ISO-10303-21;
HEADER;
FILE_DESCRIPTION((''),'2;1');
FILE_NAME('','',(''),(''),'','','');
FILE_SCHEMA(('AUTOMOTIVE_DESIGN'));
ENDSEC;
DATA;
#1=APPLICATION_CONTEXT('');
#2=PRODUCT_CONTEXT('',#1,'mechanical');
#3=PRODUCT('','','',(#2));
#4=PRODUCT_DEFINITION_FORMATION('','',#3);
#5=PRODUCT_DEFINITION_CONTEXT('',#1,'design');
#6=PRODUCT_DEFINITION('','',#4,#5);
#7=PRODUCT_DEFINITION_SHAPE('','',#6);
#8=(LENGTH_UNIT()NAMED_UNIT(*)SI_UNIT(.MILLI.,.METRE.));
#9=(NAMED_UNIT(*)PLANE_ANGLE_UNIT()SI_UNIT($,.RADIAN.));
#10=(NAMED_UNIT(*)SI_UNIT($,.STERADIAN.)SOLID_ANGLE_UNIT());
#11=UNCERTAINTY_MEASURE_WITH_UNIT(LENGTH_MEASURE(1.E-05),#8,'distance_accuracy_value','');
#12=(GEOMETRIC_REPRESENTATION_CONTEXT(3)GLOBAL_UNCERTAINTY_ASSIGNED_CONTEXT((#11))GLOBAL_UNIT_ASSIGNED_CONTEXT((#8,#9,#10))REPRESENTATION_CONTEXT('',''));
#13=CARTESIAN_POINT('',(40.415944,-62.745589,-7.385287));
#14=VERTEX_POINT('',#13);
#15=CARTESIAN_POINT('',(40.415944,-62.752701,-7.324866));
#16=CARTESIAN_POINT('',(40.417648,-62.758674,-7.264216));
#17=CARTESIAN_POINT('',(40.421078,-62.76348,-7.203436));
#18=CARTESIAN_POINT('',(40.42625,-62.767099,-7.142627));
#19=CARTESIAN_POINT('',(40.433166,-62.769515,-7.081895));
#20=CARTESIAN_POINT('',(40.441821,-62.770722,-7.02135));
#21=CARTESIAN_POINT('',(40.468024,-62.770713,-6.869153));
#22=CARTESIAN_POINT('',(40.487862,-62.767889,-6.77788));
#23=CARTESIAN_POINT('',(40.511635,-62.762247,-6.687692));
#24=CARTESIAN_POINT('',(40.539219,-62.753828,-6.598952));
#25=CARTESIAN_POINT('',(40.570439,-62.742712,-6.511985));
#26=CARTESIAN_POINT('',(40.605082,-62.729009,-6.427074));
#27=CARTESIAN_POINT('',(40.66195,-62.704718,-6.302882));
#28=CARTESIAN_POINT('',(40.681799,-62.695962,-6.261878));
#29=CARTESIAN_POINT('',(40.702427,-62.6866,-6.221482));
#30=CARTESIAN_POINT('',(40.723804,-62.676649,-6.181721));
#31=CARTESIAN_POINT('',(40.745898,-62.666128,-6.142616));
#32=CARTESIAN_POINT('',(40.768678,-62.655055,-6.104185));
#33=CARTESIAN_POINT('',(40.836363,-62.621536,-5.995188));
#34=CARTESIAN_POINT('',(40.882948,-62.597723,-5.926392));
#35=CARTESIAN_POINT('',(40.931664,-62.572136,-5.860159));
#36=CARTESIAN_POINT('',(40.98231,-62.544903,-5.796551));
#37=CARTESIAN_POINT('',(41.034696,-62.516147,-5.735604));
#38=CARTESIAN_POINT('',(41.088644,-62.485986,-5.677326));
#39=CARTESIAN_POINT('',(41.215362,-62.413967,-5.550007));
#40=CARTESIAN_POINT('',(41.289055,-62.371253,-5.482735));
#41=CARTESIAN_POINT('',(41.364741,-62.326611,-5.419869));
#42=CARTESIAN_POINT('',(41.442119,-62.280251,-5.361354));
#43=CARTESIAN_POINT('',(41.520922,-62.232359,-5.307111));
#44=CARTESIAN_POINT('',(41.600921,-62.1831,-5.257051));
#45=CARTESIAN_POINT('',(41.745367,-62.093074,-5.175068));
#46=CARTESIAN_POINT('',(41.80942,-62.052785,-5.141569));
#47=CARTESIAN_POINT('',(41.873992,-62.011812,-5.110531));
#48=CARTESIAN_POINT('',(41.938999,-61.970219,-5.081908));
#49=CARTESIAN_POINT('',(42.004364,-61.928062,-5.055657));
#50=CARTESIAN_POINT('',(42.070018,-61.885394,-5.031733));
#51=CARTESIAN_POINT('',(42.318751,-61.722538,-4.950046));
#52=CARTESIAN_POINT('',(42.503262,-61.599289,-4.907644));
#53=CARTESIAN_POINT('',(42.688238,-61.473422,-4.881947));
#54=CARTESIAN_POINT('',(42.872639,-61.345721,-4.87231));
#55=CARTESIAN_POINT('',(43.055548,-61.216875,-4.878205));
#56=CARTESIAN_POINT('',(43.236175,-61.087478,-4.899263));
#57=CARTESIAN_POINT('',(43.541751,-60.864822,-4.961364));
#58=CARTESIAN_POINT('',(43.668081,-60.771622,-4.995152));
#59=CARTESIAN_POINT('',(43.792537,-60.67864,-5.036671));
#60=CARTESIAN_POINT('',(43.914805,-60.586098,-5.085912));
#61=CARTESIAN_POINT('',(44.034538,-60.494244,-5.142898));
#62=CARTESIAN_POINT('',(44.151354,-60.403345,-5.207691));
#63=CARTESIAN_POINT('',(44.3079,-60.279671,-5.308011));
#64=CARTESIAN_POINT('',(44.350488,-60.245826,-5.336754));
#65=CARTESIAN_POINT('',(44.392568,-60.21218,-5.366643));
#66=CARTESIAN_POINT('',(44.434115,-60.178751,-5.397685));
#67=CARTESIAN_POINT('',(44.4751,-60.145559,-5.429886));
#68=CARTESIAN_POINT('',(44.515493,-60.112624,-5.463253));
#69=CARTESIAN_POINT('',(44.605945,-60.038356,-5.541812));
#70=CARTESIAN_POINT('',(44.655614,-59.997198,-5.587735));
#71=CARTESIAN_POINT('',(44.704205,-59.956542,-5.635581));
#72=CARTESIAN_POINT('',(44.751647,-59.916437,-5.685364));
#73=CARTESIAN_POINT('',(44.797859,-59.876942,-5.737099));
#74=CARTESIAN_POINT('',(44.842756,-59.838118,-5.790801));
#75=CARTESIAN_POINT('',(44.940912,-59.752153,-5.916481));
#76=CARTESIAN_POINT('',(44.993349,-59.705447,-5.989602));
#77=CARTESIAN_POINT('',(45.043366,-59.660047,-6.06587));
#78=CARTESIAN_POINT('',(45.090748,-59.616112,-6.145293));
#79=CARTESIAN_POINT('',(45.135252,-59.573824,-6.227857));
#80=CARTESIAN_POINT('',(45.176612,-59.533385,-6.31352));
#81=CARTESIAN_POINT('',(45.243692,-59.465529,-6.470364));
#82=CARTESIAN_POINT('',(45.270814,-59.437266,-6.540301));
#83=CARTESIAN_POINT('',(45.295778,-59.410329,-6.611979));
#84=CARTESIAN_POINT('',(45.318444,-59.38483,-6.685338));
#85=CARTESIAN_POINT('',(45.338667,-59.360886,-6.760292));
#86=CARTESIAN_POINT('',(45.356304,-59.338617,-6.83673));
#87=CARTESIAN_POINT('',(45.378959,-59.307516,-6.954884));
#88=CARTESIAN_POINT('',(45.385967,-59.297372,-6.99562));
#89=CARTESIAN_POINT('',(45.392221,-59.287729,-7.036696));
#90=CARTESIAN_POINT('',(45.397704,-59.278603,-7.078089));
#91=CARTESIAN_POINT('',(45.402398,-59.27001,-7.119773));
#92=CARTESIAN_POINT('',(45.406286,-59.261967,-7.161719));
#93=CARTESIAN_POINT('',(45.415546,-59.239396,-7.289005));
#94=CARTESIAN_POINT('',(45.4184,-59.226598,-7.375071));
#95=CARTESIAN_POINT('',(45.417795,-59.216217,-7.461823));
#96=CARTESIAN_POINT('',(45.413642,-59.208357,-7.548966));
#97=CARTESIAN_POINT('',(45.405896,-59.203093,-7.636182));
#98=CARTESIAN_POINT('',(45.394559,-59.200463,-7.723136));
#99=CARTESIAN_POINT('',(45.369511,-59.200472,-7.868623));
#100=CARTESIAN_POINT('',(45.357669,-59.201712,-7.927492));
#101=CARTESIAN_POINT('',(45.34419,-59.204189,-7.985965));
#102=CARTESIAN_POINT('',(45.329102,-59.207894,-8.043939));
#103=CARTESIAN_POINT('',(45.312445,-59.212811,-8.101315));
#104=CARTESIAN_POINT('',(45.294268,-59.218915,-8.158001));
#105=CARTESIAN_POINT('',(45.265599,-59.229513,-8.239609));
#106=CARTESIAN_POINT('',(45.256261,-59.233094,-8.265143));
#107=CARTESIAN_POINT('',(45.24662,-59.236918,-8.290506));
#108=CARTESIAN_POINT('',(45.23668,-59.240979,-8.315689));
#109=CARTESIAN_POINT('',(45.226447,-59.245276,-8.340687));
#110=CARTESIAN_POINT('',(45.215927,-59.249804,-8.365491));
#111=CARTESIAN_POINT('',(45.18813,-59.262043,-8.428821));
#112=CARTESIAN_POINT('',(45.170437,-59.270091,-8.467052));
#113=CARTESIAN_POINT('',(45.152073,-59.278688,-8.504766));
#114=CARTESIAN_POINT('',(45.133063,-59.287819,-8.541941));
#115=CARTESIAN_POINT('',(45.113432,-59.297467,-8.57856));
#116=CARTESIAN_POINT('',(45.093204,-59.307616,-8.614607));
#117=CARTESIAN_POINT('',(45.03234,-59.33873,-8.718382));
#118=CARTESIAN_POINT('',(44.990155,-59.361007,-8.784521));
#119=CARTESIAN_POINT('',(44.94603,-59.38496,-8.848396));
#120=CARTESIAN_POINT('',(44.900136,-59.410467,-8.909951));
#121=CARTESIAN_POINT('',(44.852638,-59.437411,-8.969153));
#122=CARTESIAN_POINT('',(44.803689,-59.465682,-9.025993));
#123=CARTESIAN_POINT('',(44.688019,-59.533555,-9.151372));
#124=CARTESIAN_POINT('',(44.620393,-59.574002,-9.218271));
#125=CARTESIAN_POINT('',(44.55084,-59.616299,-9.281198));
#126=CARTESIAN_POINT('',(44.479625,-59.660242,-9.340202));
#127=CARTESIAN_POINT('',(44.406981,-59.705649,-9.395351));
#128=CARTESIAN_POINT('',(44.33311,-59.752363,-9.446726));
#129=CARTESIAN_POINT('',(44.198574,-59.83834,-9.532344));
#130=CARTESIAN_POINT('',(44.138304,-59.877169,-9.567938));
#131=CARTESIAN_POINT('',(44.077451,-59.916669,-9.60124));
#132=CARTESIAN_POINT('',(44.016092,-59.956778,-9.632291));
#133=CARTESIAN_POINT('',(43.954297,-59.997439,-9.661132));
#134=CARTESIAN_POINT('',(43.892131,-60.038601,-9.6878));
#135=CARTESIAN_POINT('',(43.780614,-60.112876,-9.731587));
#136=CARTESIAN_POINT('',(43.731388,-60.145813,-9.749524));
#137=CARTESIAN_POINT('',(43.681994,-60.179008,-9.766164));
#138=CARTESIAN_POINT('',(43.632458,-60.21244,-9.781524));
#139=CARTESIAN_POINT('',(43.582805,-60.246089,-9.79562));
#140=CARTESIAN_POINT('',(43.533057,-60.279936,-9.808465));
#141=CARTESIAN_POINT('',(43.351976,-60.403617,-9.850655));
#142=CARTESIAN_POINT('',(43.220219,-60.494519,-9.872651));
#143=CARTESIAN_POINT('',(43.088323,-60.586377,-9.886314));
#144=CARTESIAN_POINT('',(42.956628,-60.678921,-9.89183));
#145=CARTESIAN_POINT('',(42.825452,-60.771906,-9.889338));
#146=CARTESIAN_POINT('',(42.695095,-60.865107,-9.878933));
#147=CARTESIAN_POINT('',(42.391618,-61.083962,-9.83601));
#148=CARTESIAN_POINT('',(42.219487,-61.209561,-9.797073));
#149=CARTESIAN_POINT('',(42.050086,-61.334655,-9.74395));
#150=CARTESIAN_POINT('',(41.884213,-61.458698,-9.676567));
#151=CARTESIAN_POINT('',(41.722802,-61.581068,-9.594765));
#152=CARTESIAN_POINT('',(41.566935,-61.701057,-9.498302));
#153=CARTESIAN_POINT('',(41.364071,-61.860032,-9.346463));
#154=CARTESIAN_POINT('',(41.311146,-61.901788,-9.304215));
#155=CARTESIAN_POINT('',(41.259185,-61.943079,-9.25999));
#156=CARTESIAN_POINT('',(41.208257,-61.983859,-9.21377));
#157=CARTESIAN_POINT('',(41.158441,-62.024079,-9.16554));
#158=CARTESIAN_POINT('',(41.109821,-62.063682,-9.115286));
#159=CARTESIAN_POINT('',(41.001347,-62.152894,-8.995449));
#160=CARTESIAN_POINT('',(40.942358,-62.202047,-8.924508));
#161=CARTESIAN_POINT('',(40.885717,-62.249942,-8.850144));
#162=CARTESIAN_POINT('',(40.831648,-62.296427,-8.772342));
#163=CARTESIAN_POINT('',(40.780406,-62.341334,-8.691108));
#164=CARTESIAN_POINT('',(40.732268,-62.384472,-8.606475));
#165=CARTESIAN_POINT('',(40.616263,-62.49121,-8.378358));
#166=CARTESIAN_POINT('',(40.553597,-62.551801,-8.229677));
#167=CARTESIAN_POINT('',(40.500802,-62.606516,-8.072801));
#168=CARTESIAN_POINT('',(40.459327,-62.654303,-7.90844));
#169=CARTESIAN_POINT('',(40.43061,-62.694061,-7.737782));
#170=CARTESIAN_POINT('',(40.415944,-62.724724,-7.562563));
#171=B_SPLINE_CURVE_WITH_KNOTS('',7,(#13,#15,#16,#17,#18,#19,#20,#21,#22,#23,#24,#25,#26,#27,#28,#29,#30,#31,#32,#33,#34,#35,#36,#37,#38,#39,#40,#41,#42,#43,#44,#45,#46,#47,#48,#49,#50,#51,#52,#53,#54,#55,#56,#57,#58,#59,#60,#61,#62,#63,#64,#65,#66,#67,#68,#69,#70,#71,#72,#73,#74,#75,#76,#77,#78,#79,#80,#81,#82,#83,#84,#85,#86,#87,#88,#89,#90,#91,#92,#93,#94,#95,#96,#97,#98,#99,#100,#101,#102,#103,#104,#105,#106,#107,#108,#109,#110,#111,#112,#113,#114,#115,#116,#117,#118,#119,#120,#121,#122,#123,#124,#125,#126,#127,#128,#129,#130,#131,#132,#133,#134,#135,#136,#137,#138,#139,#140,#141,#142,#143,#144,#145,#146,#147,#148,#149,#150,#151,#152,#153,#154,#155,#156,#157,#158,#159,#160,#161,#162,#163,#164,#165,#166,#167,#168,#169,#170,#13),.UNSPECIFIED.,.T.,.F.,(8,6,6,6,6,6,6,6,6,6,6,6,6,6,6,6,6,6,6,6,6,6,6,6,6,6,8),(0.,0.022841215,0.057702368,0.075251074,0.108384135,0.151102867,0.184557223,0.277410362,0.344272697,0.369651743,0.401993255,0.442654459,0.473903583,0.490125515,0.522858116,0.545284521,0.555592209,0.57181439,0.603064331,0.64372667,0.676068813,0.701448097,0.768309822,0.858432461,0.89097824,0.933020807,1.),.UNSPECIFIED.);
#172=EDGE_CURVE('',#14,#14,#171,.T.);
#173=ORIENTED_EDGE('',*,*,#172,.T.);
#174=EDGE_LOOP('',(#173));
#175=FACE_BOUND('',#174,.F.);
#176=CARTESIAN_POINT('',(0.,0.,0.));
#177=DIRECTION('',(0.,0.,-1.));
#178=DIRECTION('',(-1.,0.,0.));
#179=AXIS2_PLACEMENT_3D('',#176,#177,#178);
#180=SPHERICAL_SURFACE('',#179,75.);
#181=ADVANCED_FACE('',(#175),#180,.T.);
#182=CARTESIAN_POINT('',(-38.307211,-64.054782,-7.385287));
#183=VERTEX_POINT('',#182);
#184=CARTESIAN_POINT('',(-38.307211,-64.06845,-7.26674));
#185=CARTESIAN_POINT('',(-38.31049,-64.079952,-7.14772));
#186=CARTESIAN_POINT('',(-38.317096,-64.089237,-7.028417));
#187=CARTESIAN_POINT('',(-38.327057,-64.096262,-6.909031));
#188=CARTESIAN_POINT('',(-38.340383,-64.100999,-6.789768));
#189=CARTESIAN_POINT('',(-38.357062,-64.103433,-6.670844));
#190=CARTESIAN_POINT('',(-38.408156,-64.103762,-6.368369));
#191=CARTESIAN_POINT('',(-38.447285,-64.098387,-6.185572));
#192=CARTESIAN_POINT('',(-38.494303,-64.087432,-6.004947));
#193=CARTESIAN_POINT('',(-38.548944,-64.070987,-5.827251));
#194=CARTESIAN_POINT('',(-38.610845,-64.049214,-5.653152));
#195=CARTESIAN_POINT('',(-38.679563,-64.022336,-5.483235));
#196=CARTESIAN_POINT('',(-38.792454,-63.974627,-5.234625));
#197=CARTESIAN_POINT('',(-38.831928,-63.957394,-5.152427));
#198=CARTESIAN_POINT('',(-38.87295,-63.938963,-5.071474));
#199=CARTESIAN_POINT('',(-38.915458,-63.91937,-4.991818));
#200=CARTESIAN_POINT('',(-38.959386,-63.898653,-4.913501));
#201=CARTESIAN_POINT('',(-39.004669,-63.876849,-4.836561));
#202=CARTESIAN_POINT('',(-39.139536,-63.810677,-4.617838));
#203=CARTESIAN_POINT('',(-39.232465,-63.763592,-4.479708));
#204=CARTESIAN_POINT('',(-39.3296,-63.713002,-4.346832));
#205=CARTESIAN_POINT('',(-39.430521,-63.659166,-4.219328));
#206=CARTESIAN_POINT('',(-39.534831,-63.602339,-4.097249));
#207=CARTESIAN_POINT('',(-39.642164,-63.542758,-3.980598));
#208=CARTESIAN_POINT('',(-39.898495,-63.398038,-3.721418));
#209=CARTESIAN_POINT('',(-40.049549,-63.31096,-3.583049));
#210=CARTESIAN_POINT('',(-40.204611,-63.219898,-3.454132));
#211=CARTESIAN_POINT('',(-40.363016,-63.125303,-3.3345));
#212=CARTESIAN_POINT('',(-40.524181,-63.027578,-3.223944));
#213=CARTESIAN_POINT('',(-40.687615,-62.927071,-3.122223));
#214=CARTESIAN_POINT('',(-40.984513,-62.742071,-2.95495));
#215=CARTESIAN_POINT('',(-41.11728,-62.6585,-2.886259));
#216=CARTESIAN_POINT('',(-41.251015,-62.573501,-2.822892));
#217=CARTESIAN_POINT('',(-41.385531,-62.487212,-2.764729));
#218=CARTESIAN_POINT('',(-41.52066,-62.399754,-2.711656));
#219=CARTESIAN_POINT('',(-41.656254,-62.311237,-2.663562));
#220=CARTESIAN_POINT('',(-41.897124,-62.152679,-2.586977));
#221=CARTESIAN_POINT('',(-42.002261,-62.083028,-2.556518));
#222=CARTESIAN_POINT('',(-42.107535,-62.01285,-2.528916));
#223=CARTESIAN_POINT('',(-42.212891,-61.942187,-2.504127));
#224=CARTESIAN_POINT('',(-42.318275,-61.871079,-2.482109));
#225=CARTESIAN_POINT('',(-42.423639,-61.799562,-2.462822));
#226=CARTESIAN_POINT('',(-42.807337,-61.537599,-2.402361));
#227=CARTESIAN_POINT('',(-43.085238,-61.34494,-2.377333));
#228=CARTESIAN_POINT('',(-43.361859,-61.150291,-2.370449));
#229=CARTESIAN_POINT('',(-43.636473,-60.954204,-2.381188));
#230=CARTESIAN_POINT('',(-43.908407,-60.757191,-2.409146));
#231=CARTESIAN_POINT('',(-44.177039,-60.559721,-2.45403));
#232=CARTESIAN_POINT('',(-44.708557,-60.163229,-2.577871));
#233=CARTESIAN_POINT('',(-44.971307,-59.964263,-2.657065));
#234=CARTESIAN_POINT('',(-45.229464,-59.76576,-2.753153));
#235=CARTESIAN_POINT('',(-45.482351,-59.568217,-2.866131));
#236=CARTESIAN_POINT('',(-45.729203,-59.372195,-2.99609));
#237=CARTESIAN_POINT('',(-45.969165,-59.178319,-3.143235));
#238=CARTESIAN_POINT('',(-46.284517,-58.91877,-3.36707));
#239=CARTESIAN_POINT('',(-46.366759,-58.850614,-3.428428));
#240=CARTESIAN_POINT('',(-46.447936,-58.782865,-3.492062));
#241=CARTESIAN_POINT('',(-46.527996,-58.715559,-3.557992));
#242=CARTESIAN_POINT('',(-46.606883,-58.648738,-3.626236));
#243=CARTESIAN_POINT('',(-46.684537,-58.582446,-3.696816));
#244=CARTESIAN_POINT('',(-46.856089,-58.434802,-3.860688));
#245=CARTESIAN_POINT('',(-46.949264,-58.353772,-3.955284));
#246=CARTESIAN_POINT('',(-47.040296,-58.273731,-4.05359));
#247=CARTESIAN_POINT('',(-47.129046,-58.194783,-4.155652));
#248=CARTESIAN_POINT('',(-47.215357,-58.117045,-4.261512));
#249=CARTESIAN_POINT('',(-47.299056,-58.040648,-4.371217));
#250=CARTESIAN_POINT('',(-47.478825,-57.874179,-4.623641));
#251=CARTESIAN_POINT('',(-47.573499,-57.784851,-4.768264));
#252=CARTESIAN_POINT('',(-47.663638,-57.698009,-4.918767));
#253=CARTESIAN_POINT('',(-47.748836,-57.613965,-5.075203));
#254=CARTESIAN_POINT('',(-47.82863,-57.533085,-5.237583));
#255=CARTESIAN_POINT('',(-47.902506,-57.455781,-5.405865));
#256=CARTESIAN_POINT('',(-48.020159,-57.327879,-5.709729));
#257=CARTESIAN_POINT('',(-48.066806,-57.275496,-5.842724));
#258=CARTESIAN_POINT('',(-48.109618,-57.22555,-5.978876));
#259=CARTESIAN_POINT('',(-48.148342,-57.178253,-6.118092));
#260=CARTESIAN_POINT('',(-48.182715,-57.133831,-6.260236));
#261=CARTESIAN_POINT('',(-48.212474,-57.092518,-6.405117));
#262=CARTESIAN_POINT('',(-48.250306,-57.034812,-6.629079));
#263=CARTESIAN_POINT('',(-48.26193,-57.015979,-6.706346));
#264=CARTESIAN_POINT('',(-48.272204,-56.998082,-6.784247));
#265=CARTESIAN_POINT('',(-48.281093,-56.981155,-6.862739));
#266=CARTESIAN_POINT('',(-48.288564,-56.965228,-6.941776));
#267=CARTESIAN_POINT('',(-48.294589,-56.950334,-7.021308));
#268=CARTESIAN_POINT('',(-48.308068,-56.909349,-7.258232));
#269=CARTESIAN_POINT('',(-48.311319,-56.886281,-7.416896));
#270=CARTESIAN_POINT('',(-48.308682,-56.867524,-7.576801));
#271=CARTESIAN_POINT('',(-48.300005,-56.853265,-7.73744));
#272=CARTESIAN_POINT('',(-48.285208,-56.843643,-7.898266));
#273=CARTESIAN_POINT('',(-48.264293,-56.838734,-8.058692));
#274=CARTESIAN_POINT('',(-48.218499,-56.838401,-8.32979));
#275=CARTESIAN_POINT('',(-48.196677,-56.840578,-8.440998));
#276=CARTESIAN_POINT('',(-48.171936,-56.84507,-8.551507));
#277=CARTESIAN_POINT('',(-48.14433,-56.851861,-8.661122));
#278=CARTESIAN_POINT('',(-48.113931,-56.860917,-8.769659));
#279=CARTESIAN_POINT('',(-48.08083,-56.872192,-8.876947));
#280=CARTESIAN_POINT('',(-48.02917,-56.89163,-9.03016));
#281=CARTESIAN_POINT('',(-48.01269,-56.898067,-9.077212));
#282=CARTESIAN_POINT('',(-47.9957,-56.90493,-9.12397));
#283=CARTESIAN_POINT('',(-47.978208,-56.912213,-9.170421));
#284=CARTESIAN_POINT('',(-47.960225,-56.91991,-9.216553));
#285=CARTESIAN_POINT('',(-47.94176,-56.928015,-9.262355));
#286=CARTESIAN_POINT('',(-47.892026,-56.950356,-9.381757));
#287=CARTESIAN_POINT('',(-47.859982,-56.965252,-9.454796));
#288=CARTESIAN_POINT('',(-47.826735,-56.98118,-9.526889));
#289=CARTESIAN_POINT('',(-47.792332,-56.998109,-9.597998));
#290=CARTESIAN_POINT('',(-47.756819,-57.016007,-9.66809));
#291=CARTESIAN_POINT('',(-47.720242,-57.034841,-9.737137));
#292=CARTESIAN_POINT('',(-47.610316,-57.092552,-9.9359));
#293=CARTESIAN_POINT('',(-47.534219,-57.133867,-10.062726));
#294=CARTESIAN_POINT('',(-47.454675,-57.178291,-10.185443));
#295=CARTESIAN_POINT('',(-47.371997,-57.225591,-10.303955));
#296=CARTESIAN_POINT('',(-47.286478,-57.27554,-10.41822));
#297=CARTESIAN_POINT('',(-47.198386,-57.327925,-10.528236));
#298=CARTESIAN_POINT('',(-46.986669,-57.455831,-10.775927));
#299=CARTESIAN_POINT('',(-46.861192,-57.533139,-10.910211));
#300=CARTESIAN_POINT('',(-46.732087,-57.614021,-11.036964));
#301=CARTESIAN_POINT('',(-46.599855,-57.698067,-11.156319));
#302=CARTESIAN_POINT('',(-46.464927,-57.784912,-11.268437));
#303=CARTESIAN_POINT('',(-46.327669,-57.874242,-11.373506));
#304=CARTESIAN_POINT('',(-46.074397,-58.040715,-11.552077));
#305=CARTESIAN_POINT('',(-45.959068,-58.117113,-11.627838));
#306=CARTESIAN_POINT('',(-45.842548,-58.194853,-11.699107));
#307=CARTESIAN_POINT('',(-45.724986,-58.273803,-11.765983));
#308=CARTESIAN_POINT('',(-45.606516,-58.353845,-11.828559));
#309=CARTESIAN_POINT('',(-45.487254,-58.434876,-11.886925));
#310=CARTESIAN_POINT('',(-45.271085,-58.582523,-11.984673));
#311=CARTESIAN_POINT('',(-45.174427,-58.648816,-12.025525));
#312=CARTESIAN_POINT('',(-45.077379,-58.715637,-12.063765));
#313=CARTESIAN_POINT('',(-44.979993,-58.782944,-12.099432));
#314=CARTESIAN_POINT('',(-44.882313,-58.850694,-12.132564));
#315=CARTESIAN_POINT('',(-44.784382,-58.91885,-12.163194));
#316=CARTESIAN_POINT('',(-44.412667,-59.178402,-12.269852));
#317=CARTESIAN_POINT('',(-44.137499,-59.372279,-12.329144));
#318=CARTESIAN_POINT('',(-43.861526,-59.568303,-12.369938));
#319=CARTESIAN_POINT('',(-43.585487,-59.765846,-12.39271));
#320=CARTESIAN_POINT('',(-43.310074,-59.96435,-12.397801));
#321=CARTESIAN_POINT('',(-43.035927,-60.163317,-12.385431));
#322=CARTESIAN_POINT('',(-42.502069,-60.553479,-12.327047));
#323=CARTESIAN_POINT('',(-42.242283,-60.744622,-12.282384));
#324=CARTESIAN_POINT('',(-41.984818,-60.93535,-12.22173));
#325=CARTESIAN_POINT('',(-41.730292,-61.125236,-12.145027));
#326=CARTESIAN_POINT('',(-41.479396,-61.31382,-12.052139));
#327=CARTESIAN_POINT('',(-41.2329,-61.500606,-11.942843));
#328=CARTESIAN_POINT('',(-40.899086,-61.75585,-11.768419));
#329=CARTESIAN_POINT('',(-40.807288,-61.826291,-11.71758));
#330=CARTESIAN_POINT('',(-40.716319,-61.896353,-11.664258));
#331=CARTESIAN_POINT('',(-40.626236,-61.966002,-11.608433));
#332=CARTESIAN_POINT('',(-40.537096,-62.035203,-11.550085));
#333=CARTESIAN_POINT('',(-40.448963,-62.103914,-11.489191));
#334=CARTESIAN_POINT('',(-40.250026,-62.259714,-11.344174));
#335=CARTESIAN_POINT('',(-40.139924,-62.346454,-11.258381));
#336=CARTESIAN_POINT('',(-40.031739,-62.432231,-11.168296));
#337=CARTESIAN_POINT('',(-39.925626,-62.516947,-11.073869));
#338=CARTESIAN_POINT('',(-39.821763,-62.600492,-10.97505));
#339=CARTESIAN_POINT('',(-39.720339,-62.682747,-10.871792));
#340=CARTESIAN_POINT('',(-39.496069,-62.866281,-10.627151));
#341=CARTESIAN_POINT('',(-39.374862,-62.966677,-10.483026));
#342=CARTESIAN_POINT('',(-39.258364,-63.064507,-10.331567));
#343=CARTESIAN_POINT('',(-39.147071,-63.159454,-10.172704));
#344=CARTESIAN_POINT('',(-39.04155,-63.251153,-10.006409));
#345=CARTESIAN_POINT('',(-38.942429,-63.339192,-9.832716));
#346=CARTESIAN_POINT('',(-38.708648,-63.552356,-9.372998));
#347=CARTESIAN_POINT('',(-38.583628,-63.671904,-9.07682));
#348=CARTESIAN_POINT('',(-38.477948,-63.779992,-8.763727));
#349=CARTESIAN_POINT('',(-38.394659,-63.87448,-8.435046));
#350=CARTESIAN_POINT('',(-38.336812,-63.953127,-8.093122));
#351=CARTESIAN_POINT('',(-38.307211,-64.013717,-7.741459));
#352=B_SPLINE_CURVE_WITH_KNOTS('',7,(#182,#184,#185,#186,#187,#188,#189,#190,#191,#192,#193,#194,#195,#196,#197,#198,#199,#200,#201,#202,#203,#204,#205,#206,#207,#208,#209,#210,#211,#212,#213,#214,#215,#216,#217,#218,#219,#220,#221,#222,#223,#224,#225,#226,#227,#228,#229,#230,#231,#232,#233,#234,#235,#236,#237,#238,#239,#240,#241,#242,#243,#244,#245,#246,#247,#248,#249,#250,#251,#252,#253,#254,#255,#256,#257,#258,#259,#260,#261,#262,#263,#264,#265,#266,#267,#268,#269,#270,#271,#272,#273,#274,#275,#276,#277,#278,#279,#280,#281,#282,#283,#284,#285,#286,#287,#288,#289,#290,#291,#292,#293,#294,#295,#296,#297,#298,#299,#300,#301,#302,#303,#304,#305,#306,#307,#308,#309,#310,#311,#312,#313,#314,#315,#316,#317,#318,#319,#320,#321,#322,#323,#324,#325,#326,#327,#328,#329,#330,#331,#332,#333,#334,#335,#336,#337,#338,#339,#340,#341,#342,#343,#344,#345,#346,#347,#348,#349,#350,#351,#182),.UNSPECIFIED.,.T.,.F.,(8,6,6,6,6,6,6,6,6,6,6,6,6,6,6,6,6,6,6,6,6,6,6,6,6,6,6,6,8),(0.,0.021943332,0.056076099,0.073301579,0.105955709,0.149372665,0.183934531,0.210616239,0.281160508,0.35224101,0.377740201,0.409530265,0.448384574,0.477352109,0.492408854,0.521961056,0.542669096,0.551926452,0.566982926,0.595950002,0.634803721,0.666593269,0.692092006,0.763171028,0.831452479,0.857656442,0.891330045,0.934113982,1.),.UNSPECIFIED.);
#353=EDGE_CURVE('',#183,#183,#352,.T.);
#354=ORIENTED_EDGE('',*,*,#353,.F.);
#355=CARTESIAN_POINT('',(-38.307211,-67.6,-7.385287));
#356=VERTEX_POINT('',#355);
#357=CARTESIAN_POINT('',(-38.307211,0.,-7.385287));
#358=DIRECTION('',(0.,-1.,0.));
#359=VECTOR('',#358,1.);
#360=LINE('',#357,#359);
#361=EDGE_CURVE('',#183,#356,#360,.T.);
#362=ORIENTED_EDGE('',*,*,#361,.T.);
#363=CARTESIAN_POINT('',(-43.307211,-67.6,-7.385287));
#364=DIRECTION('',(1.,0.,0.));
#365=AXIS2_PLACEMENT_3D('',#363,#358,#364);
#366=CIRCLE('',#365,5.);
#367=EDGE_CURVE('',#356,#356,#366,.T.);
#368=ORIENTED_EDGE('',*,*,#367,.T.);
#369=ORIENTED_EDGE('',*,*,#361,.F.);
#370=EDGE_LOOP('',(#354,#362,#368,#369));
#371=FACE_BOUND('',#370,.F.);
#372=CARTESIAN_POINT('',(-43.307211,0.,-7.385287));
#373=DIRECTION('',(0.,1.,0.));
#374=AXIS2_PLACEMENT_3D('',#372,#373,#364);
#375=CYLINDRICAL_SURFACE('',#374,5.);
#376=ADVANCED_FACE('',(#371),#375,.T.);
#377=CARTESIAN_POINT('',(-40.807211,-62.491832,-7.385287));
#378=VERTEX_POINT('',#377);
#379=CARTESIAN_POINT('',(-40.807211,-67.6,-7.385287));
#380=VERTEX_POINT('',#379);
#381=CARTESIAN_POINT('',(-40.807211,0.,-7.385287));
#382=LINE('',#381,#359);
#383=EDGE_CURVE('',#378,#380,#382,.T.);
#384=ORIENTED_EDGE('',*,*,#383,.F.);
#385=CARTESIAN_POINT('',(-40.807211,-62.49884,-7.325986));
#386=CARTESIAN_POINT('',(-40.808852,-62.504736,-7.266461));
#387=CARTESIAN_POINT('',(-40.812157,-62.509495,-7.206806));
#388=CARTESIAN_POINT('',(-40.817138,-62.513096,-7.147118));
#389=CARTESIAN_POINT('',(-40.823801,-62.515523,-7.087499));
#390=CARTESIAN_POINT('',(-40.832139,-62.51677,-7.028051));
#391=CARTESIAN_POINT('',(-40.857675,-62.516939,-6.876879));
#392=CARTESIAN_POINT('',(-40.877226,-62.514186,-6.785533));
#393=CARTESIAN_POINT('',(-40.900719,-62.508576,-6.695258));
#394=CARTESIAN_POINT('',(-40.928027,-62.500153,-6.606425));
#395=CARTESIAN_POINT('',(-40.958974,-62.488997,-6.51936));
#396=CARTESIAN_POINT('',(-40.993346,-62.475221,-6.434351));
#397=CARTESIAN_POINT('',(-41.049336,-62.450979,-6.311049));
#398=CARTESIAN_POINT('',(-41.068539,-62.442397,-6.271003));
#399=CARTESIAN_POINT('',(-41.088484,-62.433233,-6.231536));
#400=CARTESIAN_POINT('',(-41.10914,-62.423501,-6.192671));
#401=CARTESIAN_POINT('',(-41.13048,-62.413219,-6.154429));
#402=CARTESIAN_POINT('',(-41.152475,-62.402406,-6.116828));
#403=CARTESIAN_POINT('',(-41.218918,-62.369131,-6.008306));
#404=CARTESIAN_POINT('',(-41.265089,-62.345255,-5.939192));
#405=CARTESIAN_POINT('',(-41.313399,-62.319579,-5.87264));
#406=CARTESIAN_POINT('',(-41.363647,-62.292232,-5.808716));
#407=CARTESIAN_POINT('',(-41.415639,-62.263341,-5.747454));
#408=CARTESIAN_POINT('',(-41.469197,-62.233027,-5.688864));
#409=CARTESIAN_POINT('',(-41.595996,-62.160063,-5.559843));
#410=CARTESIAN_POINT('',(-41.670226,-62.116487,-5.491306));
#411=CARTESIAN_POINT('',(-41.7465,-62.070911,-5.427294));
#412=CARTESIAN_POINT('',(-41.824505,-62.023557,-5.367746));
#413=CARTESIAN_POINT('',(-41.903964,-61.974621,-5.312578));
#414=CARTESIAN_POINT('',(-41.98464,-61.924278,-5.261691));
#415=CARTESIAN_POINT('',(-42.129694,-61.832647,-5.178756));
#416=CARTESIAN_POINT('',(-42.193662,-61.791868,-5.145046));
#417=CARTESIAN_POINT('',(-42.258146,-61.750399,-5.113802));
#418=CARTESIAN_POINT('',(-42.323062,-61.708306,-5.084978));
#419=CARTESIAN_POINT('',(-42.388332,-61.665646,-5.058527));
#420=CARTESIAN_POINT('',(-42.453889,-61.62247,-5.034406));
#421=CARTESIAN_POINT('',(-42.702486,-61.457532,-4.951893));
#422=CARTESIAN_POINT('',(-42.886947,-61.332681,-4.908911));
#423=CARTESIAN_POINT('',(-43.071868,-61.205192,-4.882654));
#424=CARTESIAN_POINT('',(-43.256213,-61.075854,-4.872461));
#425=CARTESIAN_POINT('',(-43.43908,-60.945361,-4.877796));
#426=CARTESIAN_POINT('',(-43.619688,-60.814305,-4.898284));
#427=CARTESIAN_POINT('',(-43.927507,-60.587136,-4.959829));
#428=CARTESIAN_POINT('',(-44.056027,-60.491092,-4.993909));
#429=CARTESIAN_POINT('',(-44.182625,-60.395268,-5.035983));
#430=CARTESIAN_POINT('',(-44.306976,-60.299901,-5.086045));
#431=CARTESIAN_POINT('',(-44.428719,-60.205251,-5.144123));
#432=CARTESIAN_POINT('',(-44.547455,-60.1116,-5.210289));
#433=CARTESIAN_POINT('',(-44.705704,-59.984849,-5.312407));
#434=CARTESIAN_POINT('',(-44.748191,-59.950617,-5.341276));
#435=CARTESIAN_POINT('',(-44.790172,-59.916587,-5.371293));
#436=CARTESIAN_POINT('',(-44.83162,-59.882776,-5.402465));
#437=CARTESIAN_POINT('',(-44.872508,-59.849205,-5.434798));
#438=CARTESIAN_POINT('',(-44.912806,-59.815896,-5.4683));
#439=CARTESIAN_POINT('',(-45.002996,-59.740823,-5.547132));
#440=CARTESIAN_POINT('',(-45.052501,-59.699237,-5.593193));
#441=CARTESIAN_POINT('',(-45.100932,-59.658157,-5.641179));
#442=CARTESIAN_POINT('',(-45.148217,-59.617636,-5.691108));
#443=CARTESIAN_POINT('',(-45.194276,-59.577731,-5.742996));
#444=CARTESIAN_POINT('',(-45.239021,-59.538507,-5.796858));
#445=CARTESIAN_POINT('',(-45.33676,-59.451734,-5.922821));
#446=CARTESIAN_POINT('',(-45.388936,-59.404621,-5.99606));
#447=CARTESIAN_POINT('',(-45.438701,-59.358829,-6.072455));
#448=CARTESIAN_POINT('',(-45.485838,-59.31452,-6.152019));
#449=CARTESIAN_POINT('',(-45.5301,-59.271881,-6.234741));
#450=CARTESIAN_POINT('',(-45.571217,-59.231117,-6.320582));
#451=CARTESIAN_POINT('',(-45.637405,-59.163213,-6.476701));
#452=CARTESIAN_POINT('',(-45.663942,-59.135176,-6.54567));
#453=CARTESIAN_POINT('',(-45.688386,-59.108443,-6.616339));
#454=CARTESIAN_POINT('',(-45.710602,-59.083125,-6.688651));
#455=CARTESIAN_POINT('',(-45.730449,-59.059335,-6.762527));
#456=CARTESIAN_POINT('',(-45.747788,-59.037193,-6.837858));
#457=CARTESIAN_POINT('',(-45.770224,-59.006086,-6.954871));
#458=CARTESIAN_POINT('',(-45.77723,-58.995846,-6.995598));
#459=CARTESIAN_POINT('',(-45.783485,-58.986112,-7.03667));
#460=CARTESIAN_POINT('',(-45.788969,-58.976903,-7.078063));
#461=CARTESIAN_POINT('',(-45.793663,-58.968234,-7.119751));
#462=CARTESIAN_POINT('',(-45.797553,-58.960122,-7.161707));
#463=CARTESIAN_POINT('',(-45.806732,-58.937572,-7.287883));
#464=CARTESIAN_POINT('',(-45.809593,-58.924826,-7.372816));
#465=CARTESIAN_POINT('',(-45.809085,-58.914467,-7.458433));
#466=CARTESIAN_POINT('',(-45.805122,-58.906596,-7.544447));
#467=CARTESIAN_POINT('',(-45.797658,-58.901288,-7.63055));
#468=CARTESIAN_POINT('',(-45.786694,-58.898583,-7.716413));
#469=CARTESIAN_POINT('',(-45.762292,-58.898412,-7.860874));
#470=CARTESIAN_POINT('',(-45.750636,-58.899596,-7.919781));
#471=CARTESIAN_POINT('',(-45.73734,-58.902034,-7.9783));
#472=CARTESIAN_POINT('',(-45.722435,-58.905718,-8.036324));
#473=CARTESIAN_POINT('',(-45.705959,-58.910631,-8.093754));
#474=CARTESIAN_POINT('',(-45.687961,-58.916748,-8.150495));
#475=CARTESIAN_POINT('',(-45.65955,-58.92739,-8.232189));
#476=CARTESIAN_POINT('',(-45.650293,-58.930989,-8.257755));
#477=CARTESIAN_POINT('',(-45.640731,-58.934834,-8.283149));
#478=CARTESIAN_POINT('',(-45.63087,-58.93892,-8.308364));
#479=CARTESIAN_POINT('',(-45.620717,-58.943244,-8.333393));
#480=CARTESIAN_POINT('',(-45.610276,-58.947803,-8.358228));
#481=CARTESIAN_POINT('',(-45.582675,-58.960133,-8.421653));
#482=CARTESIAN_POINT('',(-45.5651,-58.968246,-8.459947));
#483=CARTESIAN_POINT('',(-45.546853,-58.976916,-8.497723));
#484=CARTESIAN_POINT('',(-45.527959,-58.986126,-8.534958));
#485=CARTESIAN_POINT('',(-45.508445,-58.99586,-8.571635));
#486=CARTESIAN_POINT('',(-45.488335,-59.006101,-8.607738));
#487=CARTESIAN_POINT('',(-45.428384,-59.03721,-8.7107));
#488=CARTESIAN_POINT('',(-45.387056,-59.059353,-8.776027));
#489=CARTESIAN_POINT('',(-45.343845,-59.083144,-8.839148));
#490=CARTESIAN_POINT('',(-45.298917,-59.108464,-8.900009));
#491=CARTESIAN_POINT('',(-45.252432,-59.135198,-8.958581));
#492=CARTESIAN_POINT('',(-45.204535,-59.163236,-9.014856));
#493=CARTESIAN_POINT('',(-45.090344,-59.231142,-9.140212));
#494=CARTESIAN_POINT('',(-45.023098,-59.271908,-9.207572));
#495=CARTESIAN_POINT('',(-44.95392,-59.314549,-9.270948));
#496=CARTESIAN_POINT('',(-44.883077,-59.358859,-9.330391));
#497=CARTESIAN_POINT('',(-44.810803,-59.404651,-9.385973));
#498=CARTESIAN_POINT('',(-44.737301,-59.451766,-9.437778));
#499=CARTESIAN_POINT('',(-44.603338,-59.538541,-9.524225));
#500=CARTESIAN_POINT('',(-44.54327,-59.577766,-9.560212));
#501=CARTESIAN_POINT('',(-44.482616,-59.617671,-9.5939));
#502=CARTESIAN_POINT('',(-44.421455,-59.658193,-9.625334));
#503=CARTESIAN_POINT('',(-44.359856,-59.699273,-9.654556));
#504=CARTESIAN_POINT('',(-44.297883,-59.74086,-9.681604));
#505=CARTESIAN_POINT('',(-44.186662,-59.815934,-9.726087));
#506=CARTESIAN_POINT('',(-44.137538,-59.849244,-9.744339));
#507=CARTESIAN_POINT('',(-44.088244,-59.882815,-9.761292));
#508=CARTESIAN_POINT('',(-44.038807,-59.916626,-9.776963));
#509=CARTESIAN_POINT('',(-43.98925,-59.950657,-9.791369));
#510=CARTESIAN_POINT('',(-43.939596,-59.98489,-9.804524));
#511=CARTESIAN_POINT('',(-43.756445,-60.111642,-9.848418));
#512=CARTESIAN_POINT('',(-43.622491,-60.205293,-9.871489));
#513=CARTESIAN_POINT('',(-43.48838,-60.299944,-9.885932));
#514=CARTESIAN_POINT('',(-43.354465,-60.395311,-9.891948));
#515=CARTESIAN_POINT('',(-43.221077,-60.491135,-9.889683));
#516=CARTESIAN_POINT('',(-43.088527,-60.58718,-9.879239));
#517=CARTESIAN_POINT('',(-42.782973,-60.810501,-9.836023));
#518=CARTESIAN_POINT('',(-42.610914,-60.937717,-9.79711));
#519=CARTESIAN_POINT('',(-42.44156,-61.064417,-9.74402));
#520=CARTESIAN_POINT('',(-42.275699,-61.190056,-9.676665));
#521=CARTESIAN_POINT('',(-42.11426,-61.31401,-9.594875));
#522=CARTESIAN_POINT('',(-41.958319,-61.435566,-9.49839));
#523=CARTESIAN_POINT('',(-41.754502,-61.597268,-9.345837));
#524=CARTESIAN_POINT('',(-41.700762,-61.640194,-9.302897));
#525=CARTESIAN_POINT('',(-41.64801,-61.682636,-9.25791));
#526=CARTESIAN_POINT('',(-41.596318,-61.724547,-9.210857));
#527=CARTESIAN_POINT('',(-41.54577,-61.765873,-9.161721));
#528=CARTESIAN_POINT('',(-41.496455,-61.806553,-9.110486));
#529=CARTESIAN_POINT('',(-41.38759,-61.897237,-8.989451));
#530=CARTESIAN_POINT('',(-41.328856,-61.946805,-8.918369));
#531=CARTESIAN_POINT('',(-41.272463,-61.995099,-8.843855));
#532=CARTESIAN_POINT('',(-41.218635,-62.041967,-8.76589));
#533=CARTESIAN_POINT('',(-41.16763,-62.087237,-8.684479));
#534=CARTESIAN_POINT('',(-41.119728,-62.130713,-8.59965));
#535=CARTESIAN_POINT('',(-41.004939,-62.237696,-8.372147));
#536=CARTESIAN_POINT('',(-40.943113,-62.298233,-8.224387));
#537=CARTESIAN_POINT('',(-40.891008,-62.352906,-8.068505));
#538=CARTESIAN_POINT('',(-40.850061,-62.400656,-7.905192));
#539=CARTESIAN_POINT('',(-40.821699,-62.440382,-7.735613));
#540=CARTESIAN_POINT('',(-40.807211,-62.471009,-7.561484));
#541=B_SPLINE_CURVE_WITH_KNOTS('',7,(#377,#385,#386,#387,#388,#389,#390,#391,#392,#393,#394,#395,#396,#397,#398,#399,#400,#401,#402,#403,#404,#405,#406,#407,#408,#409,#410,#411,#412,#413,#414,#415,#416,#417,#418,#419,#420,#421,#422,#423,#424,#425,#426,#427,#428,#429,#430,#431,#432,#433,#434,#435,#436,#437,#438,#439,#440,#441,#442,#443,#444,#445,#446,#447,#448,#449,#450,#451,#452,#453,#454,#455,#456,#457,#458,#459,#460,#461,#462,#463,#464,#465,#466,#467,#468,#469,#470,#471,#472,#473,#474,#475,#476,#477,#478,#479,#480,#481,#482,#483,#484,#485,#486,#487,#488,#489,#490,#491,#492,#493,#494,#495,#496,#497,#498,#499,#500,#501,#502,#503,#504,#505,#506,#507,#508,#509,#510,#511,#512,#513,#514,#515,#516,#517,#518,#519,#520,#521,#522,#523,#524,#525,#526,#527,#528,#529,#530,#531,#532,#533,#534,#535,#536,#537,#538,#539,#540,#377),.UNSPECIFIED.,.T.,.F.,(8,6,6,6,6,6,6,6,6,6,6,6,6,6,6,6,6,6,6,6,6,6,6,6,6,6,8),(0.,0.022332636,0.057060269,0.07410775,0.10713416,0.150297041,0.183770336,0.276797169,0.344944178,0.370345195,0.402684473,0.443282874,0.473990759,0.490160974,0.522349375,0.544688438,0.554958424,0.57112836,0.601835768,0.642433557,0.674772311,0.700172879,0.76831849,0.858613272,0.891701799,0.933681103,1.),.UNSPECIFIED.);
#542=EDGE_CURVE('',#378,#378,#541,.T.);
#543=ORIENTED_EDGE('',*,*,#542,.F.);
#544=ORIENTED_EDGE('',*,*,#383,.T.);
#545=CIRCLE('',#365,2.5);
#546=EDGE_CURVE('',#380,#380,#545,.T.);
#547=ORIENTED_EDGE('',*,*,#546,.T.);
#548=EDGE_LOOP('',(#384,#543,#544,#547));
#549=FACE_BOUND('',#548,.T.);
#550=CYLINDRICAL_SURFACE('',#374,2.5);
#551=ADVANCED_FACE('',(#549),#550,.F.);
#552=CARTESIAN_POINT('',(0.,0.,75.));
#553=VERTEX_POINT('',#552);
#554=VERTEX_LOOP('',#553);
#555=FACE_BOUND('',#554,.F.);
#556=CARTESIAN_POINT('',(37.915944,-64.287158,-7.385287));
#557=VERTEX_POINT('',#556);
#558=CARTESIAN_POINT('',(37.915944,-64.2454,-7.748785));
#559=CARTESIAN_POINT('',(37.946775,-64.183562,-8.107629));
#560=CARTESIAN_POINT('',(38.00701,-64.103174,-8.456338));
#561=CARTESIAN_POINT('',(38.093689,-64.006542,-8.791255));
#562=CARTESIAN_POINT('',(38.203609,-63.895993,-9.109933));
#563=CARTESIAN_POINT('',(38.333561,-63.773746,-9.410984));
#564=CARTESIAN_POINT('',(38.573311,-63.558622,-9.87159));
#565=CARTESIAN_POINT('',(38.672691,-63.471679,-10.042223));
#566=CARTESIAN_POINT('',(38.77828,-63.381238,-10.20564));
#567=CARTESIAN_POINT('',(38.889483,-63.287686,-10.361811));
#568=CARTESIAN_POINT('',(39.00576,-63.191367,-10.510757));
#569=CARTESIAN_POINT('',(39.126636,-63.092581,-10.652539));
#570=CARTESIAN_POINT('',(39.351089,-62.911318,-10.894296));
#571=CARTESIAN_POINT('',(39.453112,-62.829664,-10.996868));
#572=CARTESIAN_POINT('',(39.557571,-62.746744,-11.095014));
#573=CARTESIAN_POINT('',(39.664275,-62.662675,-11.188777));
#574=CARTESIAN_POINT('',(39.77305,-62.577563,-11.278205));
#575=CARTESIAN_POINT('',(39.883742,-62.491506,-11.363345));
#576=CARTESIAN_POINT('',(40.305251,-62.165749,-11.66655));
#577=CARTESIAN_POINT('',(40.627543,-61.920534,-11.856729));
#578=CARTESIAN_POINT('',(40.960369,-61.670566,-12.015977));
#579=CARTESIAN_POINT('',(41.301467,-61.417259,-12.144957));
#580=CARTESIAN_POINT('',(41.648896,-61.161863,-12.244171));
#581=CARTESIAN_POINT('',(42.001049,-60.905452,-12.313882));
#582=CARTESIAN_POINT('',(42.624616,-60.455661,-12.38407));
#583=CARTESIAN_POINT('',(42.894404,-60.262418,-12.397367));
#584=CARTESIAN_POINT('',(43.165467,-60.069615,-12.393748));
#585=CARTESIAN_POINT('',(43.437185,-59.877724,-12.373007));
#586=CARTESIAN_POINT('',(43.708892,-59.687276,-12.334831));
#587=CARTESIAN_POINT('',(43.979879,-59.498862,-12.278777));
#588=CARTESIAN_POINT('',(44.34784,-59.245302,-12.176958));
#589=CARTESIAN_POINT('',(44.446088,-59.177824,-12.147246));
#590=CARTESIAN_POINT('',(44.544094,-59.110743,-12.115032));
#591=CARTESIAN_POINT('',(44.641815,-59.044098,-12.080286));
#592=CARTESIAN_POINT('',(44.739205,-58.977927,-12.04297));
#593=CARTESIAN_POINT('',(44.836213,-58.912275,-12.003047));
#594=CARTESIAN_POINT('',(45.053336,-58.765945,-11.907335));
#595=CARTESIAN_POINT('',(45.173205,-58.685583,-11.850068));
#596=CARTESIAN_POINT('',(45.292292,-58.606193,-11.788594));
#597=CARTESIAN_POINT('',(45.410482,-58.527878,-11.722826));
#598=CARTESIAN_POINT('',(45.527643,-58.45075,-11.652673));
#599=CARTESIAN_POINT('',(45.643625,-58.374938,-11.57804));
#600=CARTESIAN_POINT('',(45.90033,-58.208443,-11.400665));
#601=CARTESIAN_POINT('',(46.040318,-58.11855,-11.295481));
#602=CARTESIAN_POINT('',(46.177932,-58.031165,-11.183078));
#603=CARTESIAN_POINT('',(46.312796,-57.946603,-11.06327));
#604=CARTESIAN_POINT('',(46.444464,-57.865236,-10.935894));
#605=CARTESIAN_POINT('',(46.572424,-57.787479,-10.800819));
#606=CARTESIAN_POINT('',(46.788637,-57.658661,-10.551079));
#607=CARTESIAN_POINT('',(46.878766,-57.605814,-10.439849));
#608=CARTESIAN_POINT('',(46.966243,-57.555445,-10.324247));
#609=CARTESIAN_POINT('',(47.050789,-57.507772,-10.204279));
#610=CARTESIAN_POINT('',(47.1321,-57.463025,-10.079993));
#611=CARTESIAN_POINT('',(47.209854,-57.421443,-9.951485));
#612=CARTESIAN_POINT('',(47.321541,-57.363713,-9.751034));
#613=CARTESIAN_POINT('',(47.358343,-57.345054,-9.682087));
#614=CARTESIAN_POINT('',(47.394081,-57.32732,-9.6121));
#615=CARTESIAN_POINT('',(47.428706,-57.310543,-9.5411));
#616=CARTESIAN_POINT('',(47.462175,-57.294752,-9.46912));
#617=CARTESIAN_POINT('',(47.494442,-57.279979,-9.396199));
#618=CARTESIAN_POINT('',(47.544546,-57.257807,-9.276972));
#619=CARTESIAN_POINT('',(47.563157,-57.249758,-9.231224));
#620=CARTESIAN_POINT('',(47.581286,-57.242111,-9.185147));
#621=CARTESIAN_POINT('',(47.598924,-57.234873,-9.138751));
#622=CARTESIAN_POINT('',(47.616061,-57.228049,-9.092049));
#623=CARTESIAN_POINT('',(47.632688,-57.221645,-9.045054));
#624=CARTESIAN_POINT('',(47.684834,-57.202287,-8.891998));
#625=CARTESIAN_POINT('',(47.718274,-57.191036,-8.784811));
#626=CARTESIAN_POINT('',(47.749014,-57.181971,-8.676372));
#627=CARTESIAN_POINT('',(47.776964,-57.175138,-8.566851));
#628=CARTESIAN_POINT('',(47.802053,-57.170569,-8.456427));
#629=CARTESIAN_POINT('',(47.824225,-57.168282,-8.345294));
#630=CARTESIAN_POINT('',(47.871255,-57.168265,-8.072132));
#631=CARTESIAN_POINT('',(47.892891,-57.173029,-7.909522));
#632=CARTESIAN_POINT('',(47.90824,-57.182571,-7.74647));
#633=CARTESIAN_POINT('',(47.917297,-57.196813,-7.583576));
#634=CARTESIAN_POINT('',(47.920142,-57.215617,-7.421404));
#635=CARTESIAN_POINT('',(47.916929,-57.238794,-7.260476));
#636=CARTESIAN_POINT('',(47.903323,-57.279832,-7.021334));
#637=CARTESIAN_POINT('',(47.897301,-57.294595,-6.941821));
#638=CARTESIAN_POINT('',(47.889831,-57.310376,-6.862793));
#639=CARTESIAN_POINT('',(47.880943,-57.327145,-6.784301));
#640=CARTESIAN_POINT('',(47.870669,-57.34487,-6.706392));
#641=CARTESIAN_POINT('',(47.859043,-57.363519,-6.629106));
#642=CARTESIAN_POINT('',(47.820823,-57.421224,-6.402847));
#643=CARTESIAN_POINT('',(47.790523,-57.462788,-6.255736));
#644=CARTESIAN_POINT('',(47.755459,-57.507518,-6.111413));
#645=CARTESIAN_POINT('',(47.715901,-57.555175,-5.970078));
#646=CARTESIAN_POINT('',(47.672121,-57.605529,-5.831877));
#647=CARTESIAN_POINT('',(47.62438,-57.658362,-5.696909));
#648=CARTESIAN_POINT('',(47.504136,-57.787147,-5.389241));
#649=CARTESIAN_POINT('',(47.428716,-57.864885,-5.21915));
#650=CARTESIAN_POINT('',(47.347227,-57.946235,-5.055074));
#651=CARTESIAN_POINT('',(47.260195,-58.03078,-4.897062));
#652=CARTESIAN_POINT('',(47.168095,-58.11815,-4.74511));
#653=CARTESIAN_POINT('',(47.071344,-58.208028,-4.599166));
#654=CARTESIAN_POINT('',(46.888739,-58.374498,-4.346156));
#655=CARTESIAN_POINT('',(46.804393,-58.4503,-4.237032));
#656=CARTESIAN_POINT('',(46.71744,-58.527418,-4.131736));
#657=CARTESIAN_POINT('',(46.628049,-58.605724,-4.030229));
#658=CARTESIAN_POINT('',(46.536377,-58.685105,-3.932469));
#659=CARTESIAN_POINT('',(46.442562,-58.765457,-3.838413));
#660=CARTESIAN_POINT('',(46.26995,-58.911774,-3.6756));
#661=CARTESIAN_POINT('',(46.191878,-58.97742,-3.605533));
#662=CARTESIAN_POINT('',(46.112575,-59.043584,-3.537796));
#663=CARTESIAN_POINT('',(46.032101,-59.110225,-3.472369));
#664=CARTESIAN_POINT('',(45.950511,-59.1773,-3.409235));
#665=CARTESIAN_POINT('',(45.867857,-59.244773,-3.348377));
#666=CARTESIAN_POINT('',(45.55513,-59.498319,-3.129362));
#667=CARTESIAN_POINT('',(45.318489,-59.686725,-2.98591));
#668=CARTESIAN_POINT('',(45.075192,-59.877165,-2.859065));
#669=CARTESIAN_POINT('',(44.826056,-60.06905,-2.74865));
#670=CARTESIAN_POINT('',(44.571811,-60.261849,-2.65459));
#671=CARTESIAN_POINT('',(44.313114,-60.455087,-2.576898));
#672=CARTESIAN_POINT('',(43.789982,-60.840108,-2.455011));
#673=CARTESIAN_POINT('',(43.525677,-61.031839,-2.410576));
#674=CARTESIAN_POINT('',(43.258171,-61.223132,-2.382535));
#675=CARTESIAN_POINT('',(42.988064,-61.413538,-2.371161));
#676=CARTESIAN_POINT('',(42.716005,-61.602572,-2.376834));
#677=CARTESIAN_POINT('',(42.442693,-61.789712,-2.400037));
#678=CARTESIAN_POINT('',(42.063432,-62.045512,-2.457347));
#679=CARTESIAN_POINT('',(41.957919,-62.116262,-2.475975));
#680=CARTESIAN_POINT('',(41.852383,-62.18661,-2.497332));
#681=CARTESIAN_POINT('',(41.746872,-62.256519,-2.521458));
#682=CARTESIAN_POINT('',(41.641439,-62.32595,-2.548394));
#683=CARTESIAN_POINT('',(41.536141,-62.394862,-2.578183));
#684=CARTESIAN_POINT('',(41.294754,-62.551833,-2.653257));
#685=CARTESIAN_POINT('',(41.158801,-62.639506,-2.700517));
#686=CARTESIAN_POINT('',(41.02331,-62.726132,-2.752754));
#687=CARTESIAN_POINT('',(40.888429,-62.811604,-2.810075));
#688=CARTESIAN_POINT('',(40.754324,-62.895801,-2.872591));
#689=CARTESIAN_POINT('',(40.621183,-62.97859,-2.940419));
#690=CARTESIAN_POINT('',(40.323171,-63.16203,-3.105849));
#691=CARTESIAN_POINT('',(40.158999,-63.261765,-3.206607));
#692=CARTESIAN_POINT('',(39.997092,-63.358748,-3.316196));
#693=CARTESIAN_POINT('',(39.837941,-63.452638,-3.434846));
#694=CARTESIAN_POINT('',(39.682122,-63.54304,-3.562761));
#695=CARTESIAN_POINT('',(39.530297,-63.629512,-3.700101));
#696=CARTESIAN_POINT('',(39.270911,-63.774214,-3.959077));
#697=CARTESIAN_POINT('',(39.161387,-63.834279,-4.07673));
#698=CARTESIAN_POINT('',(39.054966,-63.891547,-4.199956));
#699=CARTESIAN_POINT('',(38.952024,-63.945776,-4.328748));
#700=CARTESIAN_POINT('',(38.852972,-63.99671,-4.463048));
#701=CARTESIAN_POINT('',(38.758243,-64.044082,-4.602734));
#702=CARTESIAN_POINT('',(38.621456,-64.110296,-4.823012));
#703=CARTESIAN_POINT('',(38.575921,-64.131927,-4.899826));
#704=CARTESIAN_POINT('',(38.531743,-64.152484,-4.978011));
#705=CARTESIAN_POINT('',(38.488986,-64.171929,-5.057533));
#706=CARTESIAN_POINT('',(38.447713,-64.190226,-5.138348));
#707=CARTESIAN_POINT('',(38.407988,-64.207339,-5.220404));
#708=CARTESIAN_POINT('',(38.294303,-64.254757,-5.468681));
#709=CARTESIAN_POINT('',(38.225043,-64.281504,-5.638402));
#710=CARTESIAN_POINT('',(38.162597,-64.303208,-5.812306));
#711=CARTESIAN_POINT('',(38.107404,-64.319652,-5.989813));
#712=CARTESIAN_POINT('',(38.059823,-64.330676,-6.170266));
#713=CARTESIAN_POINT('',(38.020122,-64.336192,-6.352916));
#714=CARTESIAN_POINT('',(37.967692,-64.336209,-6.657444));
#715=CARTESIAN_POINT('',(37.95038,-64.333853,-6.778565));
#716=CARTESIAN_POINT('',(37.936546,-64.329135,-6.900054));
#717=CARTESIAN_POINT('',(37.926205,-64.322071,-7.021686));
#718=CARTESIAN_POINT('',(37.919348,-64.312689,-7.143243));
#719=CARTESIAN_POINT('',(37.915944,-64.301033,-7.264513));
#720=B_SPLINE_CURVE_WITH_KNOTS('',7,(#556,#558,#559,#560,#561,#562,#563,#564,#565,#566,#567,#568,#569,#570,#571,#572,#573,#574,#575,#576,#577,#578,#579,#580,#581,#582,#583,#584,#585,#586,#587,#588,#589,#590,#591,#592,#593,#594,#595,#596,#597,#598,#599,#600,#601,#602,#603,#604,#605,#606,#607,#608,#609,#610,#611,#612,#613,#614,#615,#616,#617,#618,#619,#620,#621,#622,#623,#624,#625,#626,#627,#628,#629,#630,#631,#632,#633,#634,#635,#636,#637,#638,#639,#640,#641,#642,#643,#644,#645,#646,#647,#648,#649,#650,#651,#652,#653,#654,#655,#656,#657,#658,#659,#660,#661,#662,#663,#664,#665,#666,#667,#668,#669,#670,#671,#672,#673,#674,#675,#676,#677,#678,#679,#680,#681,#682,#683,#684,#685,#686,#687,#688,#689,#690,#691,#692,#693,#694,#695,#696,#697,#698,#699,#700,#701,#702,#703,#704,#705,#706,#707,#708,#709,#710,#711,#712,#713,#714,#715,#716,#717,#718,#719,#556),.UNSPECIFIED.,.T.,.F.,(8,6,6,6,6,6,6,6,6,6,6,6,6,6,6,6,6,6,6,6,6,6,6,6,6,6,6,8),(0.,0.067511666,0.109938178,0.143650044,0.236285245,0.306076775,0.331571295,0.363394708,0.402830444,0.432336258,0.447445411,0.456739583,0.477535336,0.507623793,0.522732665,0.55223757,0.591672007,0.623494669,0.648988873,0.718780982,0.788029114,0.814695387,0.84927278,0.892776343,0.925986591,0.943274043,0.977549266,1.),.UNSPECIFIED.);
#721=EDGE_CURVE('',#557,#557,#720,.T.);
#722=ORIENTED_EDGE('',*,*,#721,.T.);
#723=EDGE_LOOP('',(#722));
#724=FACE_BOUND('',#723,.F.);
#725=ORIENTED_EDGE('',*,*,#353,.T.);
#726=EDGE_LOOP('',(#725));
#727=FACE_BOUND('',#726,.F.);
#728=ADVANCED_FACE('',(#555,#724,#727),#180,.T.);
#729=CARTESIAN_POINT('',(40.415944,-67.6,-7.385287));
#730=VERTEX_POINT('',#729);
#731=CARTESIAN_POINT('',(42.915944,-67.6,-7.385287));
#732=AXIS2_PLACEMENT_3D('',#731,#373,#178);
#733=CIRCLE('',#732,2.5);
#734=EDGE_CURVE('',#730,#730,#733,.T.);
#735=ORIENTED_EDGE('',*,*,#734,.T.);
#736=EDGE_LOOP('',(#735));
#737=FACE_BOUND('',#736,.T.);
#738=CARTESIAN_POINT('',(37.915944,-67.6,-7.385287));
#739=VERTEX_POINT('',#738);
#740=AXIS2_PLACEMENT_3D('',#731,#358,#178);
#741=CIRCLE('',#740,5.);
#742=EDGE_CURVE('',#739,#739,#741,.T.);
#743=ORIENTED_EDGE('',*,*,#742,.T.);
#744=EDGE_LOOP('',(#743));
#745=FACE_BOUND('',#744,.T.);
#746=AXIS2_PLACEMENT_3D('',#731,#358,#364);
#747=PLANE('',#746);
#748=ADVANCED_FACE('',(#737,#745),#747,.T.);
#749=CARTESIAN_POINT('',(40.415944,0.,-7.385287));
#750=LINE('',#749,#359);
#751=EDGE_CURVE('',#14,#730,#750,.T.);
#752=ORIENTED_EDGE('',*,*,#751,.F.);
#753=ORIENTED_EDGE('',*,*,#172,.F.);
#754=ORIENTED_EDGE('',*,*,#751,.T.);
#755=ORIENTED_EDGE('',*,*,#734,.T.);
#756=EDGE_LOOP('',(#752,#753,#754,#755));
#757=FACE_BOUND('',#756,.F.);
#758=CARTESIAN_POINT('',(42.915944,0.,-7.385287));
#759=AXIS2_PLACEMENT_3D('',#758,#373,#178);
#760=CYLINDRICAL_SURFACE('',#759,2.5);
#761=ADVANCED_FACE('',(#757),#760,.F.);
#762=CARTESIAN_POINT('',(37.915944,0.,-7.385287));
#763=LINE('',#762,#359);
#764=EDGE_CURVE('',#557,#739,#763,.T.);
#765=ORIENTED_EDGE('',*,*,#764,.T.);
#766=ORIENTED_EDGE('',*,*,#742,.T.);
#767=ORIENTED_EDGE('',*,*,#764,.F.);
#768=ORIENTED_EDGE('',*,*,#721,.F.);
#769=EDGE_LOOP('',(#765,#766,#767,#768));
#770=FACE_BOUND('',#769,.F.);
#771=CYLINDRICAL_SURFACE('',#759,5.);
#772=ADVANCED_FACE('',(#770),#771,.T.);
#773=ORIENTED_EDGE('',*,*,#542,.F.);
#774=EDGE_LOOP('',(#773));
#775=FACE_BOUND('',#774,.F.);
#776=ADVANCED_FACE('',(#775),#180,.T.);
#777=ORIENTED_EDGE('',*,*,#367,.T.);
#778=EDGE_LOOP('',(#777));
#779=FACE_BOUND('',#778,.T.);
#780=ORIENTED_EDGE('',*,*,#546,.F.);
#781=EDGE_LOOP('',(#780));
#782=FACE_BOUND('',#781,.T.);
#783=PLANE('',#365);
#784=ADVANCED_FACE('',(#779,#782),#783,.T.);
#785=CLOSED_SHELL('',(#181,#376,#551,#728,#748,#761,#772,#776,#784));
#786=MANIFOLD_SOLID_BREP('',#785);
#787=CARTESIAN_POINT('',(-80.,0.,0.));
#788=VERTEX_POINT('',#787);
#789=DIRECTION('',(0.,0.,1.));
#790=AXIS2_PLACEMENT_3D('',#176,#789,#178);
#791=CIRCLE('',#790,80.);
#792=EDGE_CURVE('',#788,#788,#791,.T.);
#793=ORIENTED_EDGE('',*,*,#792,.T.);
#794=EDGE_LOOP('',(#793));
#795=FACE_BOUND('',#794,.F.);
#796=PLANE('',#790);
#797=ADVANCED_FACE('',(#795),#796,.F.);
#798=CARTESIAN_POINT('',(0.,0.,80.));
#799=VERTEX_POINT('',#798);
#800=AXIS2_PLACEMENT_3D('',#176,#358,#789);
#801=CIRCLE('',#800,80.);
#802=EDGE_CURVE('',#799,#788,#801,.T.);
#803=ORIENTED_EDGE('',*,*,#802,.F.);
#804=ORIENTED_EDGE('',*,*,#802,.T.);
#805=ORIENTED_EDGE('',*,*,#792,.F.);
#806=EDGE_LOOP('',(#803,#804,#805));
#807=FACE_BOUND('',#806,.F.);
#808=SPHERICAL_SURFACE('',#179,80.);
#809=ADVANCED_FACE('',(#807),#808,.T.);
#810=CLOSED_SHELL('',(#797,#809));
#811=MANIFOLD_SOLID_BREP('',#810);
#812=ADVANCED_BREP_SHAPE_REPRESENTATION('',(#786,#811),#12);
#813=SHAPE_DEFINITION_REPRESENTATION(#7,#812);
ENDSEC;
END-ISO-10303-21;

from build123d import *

# Parameters (mm, degrees)
F4_R     = 5
F4_R_2   = 2.5
F5_DEPTH = 67.6


# Not quite as in the source:
# - the program builds the solid bodies; features that only make, move or delete a surface that nothing else refers to are left out


with BuildPart() as f1:
    # F0 (on Front) → F1 (revolve)
    with BuildSketch(Plane.XZ):
        with BuildLine():
            Line((0, -75), (0, 75))
            ThreePointArc((0, 75), (-75, 0), (0, -75))
        make_face()
    revolve(axis=Axis((0, 0, 4.8243552446), (0, 0, 1)))

    # F4 (on Front) → F5 (join)
    with BuildSketch(Plane.XZ):
        with BuildLine():
            ThreePointArc((47.91594401, -7.3852874339), (42.91594401, -2.3852874339), (37.91594401, -7.3852874339))
            ThreePointArc((37.91594401, -7.3852874339), (42.91594401, -12.3852874339), (47.91594401, -7.3852874339))
        make_face()
        with BuildLine():
            ThreePointArc((45.41594401, -7.3852874339), (42.91594401, -9.8852874339), (40.41594401, -7.3852874339))
            ThreePointArc((40.41594401, -7.3852874339), (42.91594401, -4.8852874339), (45.41594401, -7.3852874339))
        make_face(mode=Mode.SUBTRACT)
        with Locations((-43.3072112501, -7.3852874339)):
            Circle(F4_R)
        with Locations((-43.3072112501, -7.3852874339)):
            Circle(F4_R_2, mode=Mode.SUBTRACT)
    extrude(amount=F5_DEPTH)


with BuildPart() as f3:
    # F2 (on Front) → F3 (revolve)
    with BuildSketch(Plane.XZ):
        with BuildLine():
            Line((0, 0), (0, 80))
            ThreePointArc((0, 80), (-56.5685424949, 56.5685424949), (-80, 0))
            Line((-80, 0), (0, 0))
        make_face()
    revolve(axis=Axis((0, 0, -0.3961585462), (0, 0, 1)))


solid = Compound([f1.part, f3.part])
